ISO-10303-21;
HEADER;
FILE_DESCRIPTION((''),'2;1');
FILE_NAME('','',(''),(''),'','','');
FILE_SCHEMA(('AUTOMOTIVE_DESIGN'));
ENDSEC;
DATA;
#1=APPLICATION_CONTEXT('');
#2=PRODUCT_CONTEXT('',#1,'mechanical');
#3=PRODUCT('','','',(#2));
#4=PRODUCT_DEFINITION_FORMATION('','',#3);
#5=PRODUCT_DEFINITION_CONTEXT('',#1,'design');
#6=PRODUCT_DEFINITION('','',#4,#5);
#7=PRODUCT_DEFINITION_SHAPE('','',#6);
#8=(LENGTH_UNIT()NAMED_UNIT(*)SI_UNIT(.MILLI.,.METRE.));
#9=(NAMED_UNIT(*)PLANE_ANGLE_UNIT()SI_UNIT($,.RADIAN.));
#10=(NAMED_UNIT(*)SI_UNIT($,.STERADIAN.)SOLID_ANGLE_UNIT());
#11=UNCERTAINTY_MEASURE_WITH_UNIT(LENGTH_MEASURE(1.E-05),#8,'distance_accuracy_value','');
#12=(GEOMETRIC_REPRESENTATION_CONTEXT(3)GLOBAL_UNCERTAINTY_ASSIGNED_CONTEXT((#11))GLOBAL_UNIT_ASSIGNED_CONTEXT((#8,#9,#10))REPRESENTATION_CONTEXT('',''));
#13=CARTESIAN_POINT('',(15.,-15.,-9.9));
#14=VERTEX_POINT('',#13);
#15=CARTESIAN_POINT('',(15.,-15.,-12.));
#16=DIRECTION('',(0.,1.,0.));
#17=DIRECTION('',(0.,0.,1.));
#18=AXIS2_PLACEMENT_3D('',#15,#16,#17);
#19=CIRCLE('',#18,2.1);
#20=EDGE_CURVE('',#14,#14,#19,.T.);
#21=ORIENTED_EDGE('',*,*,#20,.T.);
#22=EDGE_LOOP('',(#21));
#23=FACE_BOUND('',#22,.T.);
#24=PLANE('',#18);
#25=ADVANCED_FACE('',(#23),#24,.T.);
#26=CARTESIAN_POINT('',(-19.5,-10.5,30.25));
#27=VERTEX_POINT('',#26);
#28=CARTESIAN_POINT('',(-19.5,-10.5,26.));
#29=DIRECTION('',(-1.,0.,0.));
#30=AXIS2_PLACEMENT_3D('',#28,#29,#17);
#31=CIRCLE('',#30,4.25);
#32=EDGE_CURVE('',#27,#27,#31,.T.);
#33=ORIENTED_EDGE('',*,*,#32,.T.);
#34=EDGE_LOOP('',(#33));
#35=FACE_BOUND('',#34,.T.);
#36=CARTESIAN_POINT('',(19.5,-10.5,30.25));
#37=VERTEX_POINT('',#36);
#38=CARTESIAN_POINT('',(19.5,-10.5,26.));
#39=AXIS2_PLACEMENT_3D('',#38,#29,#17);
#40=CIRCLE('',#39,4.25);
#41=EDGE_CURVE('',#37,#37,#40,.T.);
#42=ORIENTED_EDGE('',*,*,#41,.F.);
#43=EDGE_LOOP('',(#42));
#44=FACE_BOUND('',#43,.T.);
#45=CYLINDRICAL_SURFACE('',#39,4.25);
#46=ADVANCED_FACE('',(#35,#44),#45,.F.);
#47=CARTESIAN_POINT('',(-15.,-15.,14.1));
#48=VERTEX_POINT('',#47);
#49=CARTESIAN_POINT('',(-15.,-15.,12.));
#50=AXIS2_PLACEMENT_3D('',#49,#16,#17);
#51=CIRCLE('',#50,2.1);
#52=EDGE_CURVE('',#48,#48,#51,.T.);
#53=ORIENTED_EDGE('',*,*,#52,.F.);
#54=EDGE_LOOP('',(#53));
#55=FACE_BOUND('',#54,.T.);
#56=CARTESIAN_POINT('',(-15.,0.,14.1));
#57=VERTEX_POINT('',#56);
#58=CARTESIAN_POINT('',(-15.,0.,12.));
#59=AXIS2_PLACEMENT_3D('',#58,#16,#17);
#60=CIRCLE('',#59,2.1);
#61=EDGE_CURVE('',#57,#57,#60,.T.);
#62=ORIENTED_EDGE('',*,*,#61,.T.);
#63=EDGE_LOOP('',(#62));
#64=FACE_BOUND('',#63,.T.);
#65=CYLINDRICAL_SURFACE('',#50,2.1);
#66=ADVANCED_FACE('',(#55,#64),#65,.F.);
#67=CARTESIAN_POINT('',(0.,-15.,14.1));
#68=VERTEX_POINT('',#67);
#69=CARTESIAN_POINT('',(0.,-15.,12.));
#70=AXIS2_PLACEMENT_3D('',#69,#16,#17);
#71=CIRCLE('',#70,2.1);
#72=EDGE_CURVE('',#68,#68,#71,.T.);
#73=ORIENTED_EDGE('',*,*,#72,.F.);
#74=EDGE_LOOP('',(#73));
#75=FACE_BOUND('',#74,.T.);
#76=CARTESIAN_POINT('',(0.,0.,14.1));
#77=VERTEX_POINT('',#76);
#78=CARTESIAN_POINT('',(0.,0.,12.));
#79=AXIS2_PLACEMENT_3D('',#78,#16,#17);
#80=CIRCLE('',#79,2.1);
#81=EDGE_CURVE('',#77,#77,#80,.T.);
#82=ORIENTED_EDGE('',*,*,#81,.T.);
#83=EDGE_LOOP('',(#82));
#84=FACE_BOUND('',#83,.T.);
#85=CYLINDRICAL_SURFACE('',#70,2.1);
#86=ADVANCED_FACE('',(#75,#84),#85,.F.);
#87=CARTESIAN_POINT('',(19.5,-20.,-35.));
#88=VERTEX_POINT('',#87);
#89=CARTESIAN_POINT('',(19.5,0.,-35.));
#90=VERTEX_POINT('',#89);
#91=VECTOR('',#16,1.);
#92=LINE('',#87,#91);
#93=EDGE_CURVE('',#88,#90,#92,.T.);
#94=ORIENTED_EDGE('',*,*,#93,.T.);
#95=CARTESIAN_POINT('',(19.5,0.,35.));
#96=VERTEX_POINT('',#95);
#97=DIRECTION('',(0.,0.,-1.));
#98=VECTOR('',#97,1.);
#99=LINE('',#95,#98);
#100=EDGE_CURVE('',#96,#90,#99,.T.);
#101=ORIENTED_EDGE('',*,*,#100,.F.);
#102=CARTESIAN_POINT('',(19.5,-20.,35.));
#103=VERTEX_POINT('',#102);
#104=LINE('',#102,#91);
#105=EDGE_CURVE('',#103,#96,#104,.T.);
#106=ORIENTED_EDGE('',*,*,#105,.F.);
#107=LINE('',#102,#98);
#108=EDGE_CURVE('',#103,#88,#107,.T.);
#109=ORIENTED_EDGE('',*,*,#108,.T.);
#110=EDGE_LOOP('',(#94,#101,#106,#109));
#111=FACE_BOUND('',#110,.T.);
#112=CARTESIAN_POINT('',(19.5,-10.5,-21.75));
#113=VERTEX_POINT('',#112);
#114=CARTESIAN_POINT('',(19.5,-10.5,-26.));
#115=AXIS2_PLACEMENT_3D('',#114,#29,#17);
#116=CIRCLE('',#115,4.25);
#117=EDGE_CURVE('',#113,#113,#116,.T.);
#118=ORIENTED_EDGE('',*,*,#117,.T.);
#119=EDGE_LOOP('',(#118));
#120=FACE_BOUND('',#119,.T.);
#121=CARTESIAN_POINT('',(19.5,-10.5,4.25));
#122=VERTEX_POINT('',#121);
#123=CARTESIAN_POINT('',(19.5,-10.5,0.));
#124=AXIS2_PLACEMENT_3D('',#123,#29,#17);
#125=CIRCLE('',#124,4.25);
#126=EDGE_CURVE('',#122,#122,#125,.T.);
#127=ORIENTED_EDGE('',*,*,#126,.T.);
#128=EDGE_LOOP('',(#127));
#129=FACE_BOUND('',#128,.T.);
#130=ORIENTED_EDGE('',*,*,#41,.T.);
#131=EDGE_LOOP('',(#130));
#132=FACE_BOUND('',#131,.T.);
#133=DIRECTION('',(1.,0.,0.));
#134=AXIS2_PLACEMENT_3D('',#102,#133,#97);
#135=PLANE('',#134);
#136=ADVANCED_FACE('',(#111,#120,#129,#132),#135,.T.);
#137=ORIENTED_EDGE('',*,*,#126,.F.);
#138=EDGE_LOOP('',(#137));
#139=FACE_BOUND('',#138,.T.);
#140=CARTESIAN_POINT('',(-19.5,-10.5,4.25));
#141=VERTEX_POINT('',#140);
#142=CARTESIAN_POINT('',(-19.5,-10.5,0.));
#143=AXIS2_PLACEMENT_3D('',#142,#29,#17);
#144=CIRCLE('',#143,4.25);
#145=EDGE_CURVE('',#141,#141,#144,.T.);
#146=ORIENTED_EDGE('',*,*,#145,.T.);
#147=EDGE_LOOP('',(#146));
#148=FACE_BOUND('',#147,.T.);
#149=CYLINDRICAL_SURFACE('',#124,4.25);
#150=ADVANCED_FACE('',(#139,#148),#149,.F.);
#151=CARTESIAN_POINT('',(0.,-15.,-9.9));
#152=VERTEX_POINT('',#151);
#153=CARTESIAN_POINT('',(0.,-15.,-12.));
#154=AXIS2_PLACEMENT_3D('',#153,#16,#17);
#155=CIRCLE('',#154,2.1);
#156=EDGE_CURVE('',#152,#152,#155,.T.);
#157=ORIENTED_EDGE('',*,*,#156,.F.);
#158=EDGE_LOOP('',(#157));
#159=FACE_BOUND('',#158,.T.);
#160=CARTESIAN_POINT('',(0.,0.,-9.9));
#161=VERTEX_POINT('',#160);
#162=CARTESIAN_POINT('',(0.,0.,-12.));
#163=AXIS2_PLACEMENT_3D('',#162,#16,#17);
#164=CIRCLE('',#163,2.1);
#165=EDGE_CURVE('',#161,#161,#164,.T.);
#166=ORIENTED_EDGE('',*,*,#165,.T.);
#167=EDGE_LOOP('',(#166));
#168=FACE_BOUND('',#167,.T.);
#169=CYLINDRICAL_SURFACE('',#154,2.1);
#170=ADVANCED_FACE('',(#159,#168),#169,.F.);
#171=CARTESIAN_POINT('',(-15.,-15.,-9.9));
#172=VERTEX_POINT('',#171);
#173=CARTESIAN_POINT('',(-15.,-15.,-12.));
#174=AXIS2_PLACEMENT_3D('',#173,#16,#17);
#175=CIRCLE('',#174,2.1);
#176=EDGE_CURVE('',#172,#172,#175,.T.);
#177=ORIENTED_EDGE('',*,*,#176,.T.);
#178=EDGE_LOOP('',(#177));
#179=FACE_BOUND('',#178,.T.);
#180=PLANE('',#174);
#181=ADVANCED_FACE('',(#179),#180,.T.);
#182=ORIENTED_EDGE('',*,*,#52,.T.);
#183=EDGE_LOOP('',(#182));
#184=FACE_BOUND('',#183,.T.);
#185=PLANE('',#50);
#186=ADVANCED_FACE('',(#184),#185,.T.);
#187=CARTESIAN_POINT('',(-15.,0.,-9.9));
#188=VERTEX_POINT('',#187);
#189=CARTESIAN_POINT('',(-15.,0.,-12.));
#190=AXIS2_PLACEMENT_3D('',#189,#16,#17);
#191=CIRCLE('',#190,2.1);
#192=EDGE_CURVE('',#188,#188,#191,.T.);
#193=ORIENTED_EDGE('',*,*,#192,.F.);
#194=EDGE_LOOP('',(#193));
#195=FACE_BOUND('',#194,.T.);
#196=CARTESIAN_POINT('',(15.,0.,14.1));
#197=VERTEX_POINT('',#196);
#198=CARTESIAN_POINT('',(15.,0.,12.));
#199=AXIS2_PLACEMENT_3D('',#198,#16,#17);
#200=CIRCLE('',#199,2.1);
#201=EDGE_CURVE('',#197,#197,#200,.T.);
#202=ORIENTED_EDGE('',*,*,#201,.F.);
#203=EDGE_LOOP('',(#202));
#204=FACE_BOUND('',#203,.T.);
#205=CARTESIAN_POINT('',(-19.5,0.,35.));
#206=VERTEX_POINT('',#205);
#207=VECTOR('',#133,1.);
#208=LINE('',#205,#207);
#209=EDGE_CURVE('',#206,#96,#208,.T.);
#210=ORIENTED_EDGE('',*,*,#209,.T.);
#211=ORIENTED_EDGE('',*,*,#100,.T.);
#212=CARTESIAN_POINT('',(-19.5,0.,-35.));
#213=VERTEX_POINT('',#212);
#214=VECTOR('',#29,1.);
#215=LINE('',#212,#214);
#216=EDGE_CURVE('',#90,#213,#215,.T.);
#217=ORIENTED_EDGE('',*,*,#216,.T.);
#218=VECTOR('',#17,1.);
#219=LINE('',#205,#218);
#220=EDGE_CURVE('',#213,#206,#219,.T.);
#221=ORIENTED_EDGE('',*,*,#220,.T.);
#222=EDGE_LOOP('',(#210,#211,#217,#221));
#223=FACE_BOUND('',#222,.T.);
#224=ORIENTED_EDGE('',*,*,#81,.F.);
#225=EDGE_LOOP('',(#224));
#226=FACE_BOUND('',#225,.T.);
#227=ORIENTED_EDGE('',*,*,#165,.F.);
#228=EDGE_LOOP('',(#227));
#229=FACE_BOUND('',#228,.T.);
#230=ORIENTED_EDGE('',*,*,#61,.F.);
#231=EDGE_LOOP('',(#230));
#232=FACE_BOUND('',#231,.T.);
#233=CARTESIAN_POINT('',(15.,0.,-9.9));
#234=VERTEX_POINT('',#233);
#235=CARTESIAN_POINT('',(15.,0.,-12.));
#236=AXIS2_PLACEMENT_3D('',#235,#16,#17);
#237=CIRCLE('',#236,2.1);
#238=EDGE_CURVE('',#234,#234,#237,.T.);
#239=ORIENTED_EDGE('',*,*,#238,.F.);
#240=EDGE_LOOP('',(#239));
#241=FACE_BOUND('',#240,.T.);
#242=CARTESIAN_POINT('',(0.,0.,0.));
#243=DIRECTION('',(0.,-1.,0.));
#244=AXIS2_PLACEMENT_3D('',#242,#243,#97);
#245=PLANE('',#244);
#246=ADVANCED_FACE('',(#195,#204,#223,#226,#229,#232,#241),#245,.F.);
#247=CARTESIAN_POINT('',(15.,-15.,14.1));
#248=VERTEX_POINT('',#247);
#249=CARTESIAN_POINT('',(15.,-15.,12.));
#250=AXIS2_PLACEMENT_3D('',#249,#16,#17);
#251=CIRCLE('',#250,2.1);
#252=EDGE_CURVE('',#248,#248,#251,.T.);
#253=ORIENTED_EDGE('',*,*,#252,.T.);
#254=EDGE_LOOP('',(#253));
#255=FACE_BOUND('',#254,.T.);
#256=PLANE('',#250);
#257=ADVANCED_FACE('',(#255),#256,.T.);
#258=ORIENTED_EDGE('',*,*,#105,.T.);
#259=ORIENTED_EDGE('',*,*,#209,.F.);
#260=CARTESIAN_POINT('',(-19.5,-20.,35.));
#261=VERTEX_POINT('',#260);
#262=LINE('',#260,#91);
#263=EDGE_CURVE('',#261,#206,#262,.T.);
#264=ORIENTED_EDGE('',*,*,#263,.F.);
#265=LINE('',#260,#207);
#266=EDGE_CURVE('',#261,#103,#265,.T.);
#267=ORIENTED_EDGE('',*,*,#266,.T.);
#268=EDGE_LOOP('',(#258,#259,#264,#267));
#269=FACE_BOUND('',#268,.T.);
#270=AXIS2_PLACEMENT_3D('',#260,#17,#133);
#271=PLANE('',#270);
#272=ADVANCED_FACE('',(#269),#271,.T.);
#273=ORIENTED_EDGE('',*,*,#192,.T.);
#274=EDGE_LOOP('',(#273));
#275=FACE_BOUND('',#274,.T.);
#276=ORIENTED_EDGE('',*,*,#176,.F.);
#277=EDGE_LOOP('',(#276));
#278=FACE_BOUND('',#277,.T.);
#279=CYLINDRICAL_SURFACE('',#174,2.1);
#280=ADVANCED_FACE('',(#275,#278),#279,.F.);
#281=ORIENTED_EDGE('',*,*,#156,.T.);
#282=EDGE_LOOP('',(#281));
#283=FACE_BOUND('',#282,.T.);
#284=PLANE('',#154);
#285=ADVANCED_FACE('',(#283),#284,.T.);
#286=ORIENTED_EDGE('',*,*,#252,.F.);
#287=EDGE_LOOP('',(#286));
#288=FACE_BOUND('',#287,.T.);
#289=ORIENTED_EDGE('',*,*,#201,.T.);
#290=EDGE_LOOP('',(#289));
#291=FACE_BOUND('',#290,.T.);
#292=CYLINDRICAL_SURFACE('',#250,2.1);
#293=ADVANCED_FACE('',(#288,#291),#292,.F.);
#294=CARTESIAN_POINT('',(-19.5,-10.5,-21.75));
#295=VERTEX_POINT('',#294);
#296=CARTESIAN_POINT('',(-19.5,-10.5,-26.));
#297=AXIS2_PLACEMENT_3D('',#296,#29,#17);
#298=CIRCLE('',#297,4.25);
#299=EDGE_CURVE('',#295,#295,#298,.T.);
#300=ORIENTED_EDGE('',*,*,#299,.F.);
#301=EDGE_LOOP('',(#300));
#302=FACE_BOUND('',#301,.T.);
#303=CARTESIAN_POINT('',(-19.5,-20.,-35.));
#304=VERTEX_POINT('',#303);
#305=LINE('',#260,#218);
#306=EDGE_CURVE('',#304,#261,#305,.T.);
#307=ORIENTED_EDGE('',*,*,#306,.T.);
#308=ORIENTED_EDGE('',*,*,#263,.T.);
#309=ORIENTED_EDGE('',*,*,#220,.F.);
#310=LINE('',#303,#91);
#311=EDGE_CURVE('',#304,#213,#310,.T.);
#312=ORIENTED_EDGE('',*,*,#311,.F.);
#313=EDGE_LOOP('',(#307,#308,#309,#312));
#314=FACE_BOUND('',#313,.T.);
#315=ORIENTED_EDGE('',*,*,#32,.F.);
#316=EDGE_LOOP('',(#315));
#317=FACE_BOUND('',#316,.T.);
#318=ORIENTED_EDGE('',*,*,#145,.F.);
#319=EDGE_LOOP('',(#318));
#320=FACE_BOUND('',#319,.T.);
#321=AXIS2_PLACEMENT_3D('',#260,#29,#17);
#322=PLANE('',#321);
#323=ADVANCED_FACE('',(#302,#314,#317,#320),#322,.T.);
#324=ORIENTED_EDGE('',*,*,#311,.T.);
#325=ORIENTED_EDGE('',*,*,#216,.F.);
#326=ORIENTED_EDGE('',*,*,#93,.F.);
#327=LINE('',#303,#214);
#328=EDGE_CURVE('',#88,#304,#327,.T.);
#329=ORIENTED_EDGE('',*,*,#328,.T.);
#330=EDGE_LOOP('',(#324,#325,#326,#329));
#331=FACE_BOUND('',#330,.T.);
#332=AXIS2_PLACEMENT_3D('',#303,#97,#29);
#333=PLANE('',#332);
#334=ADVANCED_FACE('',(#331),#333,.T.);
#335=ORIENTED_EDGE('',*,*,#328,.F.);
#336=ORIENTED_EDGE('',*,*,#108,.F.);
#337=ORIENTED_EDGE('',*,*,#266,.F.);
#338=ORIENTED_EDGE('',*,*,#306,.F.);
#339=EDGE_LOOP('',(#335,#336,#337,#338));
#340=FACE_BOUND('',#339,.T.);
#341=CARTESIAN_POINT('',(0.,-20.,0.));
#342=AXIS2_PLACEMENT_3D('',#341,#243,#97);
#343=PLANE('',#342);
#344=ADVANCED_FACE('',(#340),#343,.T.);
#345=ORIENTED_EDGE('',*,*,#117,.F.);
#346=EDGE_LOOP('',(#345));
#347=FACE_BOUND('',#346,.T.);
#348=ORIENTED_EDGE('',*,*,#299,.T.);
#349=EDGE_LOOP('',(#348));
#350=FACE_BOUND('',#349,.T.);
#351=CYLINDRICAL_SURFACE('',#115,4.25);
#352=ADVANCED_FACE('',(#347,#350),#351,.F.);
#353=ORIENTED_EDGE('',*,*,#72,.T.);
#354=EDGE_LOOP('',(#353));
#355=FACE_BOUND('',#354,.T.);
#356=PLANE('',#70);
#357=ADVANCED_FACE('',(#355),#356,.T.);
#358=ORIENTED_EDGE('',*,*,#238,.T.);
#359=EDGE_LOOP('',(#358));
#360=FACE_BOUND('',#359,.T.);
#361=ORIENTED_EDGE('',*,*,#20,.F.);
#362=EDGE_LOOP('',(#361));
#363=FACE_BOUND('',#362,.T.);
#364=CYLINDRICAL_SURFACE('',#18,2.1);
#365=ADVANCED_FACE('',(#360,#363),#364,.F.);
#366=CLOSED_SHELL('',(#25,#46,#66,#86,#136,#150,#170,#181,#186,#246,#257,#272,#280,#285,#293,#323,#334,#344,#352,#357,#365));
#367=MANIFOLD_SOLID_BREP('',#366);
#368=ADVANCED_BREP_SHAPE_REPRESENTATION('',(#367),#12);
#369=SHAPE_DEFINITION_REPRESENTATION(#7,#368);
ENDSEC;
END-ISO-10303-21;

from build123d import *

# Parameters (mm, degrees)
ESBO_O1_W             = 39
ESBO_O1_H             = 70
FLANGE_BASE1_DEPTH    = 20
ESBO_O6_R             = 2.1
CORTE_EXTRUS_O1_DEPTH = 15
ESBO_O8_R             = 4.25
CORTE_EXTRUS_O2_DEPTH = 39


# Sheet-metal steps are written as plain solids
with BuildPart() as part:
    # Esboço1 → Flange-base1 (new body)
    with BuildSketch(Plane(origin=(0, 0, 0), x_dir=(1, 0, 0), z_dir=(0, 1, 0))):
        Rectangle(ESBO_O1_W, ESBO_O1_H)
    extrude(amount=-FLANGE_BASE1_DEPTH)

    # Esboço6 → Corte-extrusão1 (cut)
    with BuildSketch(Plane(origin=(0, 0, 0), x_dir=(1, 0, 0), z_dir=(0, 1, 0))):
        with Locations(Location((-15, 12, 0), (0, 0, 270))):
            Circle(ESBO_O6_R)
        with Locations(Location((15, 12, 0), (0, 0, 270))):
            Circle(ESBO_O6_R)
        with Locations(Location((0, 12, 0), (0, 0, 270))):
            Circle(ESBO_O6_R)
        with Locations(Location((-15, -12, 0), (0, 0, 270))):
            Circle(ESBO_O6_R)
        with Locations(Location((0, -12, 0), (0, 0, 270))):
            Circle(ESBO_O6_R)
        with Locations(Location((15, -12, 0), (0, 0, 270))):
            Circle(ESBO_O6_R)
    extrude(amount=-CORTE_EXTRUS_O1_DEPTH, mode=Mode.SUBTRACT)

    # Esboço8 → Corte-extrusão2 (cut)
    with BuildSketch(Plane.ZY.offset(19.5)):
        with Locations((-26, -10.5)):
            Circle(ESBO_O8_R)
        with Locations((26, -10.5)):
            Circle(ESBO_O8_R)
        with Locations((0, -10.5)):
            Circle(ESBO_O8_R)
    extrude(amount=-CORTE_EXTRUS_O2_DEPTH, mode=Mode.SUBTRACT)


solid = part.part
